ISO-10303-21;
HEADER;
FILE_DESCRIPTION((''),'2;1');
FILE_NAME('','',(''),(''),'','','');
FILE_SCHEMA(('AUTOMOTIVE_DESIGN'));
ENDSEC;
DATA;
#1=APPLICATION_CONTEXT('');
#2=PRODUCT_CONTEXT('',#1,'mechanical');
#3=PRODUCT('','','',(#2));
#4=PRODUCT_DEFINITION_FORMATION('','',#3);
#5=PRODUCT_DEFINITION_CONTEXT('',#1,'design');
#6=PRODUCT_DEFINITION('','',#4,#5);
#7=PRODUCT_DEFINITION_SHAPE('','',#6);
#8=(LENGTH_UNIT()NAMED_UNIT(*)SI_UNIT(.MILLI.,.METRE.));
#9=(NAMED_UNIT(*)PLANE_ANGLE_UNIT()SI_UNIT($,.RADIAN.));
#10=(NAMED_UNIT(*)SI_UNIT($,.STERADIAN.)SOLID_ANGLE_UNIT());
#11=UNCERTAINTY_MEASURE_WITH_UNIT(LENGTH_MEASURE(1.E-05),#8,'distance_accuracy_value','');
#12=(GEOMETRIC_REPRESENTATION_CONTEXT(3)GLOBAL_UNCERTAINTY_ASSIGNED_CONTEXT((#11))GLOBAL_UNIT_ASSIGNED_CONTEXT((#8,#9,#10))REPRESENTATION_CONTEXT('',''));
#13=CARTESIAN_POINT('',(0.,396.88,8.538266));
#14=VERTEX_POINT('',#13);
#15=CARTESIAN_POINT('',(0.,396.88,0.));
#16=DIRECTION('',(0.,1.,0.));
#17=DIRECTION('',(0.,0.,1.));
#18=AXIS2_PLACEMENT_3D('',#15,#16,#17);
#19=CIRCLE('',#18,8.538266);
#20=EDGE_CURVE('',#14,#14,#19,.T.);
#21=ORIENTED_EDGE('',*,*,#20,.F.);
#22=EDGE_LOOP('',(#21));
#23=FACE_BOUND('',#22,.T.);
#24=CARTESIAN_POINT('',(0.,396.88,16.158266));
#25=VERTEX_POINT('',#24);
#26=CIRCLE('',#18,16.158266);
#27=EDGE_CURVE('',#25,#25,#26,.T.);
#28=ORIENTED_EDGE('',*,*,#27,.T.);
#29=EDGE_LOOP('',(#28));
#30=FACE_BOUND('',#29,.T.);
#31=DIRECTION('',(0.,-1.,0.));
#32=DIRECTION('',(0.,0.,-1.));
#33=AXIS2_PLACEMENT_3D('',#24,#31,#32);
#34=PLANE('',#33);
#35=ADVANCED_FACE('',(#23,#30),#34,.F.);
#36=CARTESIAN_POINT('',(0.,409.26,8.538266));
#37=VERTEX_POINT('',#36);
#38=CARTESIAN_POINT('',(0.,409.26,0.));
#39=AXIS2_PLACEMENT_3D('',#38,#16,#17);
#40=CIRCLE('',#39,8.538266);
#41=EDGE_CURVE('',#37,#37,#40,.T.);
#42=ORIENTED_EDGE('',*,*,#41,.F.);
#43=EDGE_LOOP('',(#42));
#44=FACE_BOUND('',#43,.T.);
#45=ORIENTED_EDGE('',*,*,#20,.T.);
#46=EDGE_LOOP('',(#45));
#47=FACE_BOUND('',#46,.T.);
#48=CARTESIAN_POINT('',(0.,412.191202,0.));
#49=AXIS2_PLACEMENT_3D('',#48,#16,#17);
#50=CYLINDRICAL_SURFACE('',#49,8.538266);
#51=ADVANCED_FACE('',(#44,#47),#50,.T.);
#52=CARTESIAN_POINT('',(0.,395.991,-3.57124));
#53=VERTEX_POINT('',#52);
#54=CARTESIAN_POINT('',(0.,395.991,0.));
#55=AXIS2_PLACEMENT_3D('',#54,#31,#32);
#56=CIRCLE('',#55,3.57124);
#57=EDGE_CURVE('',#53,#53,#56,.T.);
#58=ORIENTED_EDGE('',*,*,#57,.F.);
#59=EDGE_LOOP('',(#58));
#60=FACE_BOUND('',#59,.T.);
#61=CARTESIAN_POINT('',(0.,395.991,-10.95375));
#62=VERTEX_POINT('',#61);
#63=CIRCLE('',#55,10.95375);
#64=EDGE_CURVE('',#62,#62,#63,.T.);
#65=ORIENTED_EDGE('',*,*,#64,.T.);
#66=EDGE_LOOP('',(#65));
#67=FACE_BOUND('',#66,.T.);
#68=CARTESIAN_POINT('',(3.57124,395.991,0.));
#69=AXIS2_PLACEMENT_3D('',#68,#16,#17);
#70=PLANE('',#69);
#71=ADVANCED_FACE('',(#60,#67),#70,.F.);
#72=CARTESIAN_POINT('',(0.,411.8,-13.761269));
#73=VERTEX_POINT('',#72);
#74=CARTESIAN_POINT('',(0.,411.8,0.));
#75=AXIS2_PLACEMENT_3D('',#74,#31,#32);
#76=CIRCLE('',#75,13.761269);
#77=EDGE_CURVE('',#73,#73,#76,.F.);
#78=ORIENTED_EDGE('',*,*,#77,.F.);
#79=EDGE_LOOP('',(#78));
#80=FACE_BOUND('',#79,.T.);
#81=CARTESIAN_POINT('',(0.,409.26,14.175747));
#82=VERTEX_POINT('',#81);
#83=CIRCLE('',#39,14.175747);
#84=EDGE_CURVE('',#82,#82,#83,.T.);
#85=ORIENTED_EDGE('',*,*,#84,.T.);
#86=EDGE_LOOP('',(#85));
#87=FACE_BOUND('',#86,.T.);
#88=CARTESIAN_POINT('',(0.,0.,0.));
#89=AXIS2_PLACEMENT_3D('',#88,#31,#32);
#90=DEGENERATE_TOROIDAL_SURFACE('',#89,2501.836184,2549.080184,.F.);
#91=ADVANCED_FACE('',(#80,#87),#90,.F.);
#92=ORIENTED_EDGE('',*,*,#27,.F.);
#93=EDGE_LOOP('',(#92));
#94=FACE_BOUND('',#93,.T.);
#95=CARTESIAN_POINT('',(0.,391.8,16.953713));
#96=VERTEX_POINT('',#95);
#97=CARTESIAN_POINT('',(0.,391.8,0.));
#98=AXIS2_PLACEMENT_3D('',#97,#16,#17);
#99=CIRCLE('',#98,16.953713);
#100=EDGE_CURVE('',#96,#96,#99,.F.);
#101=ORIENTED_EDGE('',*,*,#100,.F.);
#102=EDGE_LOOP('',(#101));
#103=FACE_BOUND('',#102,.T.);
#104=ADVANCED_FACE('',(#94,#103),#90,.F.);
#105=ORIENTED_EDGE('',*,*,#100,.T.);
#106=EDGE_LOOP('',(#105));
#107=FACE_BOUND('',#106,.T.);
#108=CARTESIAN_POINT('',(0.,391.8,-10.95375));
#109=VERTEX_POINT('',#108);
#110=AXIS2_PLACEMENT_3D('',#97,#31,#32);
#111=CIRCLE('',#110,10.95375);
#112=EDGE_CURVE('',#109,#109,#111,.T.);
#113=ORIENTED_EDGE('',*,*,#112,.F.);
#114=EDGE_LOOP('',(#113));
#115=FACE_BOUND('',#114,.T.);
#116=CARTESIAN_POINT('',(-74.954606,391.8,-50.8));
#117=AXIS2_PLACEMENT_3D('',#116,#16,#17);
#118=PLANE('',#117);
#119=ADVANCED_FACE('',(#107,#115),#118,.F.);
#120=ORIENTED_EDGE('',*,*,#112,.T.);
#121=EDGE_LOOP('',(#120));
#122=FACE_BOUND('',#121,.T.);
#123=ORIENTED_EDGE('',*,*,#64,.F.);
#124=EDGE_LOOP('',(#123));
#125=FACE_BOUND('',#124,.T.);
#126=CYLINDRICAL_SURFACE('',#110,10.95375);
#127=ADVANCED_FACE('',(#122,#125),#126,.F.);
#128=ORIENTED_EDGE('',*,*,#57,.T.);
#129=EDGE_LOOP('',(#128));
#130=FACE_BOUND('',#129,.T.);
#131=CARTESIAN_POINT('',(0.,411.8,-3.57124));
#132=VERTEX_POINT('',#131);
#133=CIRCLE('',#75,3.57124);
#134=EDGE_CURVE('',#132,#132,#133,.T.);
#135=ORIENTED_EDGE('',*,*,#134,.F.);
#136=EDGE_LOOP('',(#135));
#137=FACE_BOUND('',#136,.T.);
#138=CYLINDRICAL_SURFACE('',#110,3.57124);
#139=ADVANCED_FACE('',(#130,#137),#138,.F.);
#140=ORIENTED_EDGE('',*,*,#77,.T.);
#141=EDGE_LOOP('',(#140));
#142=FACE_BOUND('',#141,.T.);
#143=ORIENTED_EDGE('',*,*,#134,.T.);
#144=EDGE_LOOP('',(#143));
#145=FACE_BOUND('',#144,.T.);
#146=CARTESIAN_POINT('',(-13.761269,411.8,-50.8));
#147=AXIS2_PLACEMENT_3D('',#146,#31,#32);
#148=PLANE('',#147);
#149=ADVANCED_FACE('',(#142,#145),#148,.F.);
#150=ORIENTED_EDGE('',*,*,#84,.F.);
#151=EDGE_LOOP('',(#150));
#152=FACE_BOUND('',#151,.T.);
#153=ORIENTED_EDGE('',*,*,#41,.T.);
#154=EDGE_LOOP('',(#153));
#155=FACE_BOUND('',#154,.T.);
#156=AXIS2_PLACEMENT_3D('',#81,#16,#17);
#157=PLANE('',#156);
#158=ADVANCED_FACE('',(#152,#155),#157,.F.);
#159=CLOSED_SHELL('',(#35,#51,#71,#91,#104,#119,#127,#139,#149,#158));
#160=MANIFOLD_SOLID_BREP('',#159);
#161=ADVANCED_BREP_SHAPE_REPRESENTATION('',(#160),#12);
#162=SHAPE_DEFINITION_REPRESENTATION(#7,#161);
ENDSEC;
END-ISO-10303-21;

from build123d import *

# Parameters (mm, degrees)
SKETCH4_W                                            = 83.533222379
SKETCH4_H                                            = 117.210352631
CUT_EXTRUDE2_DEPTH                                   = 87.376
SKETCH5_W                                            = 27.522537574
SKETCH5_H                                            = 23.027433275
SKETCH5_W_2                                          = 149.909212054
SKETCH5_H_2                                          = 391.8
CUT_EXTRUDE3_DEPTH                                   = 50.8
CBORE_FOR_1_4_BINDING_HEAD_MACHINE_SCREW_D           = 7.14248
CBORE_FOR_1_4_BINDING_HEAD_MACHINE_SCREW_DEPTH       = 37.592
CBORE_FOR_1_4_BINDING_HEAD_MACHINE_SCREW_CBORE_D     = 21.9075
CBORE_FOR_1_4_BINDING_HEAD_MACHINE_SCREW_CBORE_DEPTH = 4.191
CBORE_FOR_1_4_BINDING_HEAD_MACHINE_SCREW_TIP         = 2.145817477


# Read off the part's stored shape, not the designer's step: Shell2, Surface-Fill9
with BuildPart() as part:
    # Sketch2 → Revolve1 (revolve)
    with BuildSketch(Plane.XY):
        with BuildLine():
            ThreePointArc((-51.054, 0), (-38.258433103, 255.279509027), (0, 508))
            Line((0, 508), (0, 0))
            Line((0, 0), (-51.054, 0))
        make_face()
    revolve(axis=Axis((0, 0, 0), (0, 1, 0)))

    # Shell2 outline → Shell2 (revolve, cut)
    with BuildSketch(Plane.XY):
        with BuildLine():
            add(Edge.make_bspline(
                [(0, 488.493083776), (47.244, 246.531114188), (47.244, 0)],
                knots=[6.090357515, 6.090357515, 6.090357515, 6.283185307, 6.283185307, 6.283185307], degree=2, weights=[1, 0.99535578, 1]))
            Line((0, 488.493083776), (0, 0))
            Line((0, 0), (47.244, 0))
        make_face()
    revolve(axis=Axis((0, 0, 0), (0, 1, 0)), mode=Mode.SUBTRACT)

    # Sketch4 → Cut-Extrude2 (cut, symmetric)
    with BuildSketch(Plane(origin=(0, 0, 0), x_dir=(0, 0, -1), z_dir=(1, 0, 0))):
        with Locations((-2.96538755, 490.405176316)):
            Rectangle(SKETCH4_W, SKETCH4_H)
    extrude(amount=CUT_EXTRUDE2_DEPTH, both=True, mode=Mode.SUBTRACT)


with BuildPart() as body_2:
    # Surface-Fill9 outline → Surface-Fill9 (revolve)
    with BuildSketch(Plane.XY):
        with BuildLine():
            Line((0, 0), (47.244, 0))
            ThreePointArc((47.244, 0), (38.017691062, 216.684281379), (10.405552869, 431.8))
            Line((10.405552869, 431.8), (0, 431.8))
            Line((0, 431.8), (0, 0))
        make_face()
    revolve(axis=Axis((0, 0, 0), (0, 1, 0)))

    # Sketch5 → Cut-Extrude3 (cut, symmetric)
    with BuildSketch(Plane.XY):
        with Locations((0, 423.313716638)):
            Rectangle(SKETCH5_W, SKETCH5_H)
        with Locations((0, 195.9)):
            Rectangle(SKETCH5_W_2, SKETCH5_H_2)
    extrude(amount=CUT_EXTRUDE3_DEPTH, both=True, mode=Mode.SUBTRACT)

    # CBORE for 1/4 Binding Head Machine Screw1
    with Locations(Plane(origin=(0, 391.8, 0), x_dir=(-1, 0, 0), z_dir=(0, -1, 0))):
        with Locations((0, 0)):
            CounterBoreHole(CBORE_FOR_1_4_BINDING_HEAD_MACHINE_SCREW_D / 2, CBORE_FOR_1_4_BINDING_HEAD_MACHINE_SCREW_CBORE_D / 2, CBORE_FOR_1_4_BINDING_HEAD_MACHINE_SCREW_CBORE_DEPTH, depth=CBORE_FOR_1_4_BINDING_HEAD_MACHINE_SCREW_DEPTH)
            with Locations((0, 0, -(CBORE_FOR_1_4_BINDING_HEAD_MACHINE_SCREW_DEPTH + CBORE_FOR_1_4_BINDING_HEAD_MACHINE_SCREW_TIP / 2))):  # 118° drill point
                Cone(0, CBORE_FOR_1_4_BINDING_HEAD_MACHINE_SCREW_D / 2, CBORE_FOR_1_4_BINDING_HEAD_MACHINE_SCREW_TIP, mode=Mode.SUBTRACT)

    # Sketch12 → Cut-Revolve5 (revolve, cut)
    with BuildSketch(Plane(origin=(0, 0, 0), x_dir=(0, 0, -1), z_dir=(1, 0, 0))):
        Polygon((-14.175746987, 409.26), (-16.158265967, 396.88), (-8.538265967, 396.88), (-8.538265967, 409.26), align=None)
    revolve(axis=Axis((0, 412.191202115, 0), (0, 1, 0)), mode=Mode.SUBTRACT)


with BuildPart() as cut_revolve5_kept_piece:
    # of the separate pieces the step leaves, the one the design keeps (cut_revolve5_pieces_kept)
    add(body_2.part.solids().sort_by_distance((16.953712849, 391.8, 0))[0])


solid = cut_revolve5_kept_piece.part
